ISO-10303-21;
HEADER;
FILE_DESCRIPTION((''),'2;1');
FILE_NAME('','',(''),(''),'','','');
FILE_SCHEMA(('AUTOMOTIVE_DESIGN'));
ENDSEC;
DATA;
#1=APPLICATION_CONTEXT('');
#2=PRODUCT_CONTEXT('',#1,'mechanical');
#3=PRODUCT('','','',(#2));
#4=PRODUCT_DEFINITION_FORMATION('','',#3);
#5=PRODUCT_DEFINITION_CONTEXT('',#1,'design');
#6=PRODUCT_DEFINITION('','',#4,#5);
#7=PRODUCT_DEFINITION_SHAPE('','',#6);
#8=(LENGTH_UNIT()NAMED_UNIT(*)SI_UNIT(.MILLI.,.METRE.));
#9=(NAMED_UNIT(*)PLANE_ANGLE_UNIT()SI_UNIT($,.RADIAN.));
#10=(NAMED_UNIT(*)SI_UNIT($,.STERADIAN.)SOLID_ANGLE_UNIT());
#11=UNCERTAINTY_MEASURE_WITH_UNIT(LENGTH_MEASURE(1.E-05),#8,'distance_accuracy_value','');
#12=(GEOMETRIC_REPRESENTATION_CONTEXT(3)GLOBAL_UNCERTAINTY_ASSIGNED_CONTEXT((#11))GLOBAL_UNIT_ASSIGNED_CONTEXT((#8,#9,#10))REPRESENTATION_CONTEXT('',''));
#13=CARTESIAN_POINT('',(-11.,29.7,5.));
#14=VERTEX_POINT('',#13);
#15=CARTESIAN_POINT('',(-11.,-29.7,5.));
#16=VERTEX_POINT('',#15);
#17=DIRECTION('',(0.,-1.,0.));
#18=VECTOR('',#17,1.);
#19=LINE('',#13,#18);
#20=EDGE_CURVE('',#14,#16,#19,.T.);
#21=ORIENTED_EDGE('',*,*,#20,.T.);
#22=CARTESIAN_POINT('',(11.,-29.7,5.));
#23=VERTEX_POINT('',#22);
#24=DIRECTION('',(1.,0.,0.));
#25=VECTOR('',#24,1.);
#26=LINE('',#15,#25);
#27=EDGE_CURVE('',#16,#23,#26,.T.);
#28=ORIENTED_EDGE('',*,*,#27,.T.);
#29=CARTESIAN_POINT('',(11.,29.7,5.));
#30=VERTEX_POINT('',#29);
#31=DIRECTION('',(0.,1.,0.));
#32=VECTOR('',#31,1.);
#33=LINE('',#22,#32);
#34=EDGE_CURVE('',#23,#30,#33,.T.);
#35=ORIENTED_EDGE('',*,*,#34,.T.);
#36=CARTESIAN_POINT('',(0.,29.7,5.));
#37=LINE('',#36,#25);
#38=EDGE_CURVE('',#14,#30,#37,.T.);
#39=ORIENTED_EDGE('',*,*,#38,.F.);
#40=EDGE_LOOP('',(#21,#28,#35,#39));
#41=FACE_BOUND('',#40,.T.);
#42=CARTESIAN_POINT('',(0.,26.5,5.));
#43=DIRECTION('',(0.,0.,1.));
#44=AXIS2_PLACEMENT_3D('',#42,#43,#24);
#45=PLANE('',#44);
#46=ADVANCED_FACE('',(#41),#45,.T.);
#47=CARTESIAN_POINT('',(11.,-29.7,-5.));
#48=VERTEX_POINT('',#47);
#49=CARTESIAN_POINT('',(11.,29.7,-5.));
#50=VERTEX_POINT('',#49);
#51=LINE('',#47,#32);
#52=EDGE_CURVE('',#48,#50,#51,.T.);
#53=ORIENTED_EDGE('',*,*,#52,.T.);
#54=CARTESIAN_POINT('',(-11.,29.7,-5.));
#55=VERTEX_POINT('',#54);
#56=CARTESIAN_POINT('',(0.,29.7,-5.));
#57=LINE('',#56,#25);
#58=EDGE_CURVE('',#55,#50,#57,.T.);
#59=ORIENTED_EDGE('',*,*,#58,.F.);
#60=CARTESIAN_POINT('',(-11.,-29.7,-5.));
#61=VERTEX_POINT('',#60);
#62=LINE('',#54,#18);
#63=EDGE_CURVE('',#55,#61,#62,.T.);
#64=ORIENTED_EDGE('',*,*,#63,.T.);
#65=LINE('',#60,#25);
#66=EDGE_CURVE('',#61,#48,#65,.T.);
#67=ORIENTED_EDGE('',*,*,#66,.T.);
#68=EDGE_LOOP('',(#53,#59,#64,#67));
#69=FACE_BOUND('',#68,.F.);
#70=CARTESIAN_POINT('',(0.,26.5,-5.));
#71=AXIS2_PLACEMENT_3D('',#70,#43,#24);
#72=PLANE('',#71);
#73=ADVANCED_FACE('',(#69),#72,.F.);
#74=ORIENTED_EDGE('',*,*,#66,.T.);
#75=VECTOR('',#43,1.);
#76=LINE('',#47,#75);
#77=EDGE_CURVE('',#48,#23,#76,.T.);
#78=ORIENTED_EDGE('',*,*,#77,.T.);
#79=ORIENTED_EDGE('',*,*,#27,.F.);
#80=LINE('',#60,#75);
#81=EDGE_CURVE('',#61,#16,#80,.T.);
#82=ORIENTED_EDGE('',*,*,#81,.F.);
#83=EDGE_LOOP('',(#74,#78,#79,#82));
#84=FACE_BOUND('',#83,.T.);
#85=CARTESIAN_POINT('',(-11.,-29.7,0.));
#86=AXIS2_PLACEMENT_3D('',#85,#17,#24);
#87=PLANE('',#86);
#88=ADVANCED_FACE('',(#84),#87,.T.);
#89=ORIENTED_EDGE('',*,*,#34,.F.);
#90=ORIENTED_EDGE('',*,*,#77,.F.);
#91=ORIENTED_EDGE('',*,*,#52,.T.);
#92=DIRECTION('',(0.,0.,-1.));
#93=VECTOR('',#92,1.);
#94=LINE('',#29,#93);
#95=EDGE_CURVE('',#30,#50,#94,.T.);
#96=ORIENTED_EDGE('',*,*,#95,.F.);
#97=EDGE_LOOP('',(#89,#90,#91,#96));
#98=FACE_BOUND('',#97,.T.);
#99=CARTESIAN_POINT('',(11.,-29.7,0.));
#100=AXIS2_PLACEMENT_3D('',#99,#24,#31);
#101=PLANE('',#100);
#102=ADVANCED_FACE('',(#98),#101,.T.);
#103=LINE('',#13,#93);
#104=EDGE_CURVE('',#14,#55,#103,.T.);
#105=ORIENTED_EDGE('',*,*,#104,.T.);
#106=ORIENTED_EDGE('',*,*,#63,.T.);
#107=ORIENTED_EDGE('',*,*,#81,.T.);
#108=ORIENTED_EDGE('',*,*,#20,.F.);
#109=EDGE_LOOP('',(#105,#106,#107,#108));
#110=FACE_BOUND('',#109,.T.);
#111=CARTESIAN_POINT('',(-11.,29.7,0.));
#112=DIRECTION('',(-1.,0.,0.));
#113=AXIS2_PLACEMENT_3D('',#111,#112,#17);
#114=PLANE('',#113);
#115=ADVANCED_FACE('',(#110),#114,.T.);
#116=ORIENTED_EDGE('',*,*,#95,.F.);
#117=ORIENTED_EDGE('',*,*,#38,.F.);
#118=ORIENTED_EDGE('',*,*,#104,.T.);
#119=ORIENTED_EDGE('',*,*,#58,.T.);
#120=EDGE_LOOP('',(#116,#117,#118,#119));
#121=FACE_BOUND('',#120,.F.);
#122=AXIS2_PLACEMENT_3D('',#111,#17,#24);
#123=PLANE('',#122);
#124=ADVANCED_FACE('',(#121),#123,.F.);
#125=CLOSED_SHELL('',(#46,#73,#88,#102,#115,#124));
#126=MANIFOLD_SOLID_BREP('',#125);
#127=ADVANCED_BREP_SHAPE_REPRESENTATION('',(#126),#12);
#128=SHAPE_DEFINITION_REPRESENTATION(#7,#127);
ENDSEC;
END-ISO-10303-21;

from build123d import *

# Parameters (mm, degrees)
F2_W     = 22
F2_H     = 6.4
F2_H_2   = 12.3
F2_H_3   = 22
F4_DEPTH = 5


with BuildPart() as f4:
    # F2 (on Top) → F4 (new body, symmetric)
    with BuildSketch(Plane.XY):
        with Locations((0, 26.5)):
            Rectangle(F2_W, F2_H)
        with Locations((0, 17.15)):
            Rectangle(F2_W, F2_H_2)
        Rectangle(F2_W, F2_H_3)
        Polygon((-11, -25.98033873), (-11, -29.7), (11, -29.7), (11, -23.3), (-11, -23.3), align=None)
        with Locations((0, -17.15)):
            Rectangle(F2_W, F2_H_2)
    extrude(amount=F4_DEPTH, both=True)


solid = f4.part
